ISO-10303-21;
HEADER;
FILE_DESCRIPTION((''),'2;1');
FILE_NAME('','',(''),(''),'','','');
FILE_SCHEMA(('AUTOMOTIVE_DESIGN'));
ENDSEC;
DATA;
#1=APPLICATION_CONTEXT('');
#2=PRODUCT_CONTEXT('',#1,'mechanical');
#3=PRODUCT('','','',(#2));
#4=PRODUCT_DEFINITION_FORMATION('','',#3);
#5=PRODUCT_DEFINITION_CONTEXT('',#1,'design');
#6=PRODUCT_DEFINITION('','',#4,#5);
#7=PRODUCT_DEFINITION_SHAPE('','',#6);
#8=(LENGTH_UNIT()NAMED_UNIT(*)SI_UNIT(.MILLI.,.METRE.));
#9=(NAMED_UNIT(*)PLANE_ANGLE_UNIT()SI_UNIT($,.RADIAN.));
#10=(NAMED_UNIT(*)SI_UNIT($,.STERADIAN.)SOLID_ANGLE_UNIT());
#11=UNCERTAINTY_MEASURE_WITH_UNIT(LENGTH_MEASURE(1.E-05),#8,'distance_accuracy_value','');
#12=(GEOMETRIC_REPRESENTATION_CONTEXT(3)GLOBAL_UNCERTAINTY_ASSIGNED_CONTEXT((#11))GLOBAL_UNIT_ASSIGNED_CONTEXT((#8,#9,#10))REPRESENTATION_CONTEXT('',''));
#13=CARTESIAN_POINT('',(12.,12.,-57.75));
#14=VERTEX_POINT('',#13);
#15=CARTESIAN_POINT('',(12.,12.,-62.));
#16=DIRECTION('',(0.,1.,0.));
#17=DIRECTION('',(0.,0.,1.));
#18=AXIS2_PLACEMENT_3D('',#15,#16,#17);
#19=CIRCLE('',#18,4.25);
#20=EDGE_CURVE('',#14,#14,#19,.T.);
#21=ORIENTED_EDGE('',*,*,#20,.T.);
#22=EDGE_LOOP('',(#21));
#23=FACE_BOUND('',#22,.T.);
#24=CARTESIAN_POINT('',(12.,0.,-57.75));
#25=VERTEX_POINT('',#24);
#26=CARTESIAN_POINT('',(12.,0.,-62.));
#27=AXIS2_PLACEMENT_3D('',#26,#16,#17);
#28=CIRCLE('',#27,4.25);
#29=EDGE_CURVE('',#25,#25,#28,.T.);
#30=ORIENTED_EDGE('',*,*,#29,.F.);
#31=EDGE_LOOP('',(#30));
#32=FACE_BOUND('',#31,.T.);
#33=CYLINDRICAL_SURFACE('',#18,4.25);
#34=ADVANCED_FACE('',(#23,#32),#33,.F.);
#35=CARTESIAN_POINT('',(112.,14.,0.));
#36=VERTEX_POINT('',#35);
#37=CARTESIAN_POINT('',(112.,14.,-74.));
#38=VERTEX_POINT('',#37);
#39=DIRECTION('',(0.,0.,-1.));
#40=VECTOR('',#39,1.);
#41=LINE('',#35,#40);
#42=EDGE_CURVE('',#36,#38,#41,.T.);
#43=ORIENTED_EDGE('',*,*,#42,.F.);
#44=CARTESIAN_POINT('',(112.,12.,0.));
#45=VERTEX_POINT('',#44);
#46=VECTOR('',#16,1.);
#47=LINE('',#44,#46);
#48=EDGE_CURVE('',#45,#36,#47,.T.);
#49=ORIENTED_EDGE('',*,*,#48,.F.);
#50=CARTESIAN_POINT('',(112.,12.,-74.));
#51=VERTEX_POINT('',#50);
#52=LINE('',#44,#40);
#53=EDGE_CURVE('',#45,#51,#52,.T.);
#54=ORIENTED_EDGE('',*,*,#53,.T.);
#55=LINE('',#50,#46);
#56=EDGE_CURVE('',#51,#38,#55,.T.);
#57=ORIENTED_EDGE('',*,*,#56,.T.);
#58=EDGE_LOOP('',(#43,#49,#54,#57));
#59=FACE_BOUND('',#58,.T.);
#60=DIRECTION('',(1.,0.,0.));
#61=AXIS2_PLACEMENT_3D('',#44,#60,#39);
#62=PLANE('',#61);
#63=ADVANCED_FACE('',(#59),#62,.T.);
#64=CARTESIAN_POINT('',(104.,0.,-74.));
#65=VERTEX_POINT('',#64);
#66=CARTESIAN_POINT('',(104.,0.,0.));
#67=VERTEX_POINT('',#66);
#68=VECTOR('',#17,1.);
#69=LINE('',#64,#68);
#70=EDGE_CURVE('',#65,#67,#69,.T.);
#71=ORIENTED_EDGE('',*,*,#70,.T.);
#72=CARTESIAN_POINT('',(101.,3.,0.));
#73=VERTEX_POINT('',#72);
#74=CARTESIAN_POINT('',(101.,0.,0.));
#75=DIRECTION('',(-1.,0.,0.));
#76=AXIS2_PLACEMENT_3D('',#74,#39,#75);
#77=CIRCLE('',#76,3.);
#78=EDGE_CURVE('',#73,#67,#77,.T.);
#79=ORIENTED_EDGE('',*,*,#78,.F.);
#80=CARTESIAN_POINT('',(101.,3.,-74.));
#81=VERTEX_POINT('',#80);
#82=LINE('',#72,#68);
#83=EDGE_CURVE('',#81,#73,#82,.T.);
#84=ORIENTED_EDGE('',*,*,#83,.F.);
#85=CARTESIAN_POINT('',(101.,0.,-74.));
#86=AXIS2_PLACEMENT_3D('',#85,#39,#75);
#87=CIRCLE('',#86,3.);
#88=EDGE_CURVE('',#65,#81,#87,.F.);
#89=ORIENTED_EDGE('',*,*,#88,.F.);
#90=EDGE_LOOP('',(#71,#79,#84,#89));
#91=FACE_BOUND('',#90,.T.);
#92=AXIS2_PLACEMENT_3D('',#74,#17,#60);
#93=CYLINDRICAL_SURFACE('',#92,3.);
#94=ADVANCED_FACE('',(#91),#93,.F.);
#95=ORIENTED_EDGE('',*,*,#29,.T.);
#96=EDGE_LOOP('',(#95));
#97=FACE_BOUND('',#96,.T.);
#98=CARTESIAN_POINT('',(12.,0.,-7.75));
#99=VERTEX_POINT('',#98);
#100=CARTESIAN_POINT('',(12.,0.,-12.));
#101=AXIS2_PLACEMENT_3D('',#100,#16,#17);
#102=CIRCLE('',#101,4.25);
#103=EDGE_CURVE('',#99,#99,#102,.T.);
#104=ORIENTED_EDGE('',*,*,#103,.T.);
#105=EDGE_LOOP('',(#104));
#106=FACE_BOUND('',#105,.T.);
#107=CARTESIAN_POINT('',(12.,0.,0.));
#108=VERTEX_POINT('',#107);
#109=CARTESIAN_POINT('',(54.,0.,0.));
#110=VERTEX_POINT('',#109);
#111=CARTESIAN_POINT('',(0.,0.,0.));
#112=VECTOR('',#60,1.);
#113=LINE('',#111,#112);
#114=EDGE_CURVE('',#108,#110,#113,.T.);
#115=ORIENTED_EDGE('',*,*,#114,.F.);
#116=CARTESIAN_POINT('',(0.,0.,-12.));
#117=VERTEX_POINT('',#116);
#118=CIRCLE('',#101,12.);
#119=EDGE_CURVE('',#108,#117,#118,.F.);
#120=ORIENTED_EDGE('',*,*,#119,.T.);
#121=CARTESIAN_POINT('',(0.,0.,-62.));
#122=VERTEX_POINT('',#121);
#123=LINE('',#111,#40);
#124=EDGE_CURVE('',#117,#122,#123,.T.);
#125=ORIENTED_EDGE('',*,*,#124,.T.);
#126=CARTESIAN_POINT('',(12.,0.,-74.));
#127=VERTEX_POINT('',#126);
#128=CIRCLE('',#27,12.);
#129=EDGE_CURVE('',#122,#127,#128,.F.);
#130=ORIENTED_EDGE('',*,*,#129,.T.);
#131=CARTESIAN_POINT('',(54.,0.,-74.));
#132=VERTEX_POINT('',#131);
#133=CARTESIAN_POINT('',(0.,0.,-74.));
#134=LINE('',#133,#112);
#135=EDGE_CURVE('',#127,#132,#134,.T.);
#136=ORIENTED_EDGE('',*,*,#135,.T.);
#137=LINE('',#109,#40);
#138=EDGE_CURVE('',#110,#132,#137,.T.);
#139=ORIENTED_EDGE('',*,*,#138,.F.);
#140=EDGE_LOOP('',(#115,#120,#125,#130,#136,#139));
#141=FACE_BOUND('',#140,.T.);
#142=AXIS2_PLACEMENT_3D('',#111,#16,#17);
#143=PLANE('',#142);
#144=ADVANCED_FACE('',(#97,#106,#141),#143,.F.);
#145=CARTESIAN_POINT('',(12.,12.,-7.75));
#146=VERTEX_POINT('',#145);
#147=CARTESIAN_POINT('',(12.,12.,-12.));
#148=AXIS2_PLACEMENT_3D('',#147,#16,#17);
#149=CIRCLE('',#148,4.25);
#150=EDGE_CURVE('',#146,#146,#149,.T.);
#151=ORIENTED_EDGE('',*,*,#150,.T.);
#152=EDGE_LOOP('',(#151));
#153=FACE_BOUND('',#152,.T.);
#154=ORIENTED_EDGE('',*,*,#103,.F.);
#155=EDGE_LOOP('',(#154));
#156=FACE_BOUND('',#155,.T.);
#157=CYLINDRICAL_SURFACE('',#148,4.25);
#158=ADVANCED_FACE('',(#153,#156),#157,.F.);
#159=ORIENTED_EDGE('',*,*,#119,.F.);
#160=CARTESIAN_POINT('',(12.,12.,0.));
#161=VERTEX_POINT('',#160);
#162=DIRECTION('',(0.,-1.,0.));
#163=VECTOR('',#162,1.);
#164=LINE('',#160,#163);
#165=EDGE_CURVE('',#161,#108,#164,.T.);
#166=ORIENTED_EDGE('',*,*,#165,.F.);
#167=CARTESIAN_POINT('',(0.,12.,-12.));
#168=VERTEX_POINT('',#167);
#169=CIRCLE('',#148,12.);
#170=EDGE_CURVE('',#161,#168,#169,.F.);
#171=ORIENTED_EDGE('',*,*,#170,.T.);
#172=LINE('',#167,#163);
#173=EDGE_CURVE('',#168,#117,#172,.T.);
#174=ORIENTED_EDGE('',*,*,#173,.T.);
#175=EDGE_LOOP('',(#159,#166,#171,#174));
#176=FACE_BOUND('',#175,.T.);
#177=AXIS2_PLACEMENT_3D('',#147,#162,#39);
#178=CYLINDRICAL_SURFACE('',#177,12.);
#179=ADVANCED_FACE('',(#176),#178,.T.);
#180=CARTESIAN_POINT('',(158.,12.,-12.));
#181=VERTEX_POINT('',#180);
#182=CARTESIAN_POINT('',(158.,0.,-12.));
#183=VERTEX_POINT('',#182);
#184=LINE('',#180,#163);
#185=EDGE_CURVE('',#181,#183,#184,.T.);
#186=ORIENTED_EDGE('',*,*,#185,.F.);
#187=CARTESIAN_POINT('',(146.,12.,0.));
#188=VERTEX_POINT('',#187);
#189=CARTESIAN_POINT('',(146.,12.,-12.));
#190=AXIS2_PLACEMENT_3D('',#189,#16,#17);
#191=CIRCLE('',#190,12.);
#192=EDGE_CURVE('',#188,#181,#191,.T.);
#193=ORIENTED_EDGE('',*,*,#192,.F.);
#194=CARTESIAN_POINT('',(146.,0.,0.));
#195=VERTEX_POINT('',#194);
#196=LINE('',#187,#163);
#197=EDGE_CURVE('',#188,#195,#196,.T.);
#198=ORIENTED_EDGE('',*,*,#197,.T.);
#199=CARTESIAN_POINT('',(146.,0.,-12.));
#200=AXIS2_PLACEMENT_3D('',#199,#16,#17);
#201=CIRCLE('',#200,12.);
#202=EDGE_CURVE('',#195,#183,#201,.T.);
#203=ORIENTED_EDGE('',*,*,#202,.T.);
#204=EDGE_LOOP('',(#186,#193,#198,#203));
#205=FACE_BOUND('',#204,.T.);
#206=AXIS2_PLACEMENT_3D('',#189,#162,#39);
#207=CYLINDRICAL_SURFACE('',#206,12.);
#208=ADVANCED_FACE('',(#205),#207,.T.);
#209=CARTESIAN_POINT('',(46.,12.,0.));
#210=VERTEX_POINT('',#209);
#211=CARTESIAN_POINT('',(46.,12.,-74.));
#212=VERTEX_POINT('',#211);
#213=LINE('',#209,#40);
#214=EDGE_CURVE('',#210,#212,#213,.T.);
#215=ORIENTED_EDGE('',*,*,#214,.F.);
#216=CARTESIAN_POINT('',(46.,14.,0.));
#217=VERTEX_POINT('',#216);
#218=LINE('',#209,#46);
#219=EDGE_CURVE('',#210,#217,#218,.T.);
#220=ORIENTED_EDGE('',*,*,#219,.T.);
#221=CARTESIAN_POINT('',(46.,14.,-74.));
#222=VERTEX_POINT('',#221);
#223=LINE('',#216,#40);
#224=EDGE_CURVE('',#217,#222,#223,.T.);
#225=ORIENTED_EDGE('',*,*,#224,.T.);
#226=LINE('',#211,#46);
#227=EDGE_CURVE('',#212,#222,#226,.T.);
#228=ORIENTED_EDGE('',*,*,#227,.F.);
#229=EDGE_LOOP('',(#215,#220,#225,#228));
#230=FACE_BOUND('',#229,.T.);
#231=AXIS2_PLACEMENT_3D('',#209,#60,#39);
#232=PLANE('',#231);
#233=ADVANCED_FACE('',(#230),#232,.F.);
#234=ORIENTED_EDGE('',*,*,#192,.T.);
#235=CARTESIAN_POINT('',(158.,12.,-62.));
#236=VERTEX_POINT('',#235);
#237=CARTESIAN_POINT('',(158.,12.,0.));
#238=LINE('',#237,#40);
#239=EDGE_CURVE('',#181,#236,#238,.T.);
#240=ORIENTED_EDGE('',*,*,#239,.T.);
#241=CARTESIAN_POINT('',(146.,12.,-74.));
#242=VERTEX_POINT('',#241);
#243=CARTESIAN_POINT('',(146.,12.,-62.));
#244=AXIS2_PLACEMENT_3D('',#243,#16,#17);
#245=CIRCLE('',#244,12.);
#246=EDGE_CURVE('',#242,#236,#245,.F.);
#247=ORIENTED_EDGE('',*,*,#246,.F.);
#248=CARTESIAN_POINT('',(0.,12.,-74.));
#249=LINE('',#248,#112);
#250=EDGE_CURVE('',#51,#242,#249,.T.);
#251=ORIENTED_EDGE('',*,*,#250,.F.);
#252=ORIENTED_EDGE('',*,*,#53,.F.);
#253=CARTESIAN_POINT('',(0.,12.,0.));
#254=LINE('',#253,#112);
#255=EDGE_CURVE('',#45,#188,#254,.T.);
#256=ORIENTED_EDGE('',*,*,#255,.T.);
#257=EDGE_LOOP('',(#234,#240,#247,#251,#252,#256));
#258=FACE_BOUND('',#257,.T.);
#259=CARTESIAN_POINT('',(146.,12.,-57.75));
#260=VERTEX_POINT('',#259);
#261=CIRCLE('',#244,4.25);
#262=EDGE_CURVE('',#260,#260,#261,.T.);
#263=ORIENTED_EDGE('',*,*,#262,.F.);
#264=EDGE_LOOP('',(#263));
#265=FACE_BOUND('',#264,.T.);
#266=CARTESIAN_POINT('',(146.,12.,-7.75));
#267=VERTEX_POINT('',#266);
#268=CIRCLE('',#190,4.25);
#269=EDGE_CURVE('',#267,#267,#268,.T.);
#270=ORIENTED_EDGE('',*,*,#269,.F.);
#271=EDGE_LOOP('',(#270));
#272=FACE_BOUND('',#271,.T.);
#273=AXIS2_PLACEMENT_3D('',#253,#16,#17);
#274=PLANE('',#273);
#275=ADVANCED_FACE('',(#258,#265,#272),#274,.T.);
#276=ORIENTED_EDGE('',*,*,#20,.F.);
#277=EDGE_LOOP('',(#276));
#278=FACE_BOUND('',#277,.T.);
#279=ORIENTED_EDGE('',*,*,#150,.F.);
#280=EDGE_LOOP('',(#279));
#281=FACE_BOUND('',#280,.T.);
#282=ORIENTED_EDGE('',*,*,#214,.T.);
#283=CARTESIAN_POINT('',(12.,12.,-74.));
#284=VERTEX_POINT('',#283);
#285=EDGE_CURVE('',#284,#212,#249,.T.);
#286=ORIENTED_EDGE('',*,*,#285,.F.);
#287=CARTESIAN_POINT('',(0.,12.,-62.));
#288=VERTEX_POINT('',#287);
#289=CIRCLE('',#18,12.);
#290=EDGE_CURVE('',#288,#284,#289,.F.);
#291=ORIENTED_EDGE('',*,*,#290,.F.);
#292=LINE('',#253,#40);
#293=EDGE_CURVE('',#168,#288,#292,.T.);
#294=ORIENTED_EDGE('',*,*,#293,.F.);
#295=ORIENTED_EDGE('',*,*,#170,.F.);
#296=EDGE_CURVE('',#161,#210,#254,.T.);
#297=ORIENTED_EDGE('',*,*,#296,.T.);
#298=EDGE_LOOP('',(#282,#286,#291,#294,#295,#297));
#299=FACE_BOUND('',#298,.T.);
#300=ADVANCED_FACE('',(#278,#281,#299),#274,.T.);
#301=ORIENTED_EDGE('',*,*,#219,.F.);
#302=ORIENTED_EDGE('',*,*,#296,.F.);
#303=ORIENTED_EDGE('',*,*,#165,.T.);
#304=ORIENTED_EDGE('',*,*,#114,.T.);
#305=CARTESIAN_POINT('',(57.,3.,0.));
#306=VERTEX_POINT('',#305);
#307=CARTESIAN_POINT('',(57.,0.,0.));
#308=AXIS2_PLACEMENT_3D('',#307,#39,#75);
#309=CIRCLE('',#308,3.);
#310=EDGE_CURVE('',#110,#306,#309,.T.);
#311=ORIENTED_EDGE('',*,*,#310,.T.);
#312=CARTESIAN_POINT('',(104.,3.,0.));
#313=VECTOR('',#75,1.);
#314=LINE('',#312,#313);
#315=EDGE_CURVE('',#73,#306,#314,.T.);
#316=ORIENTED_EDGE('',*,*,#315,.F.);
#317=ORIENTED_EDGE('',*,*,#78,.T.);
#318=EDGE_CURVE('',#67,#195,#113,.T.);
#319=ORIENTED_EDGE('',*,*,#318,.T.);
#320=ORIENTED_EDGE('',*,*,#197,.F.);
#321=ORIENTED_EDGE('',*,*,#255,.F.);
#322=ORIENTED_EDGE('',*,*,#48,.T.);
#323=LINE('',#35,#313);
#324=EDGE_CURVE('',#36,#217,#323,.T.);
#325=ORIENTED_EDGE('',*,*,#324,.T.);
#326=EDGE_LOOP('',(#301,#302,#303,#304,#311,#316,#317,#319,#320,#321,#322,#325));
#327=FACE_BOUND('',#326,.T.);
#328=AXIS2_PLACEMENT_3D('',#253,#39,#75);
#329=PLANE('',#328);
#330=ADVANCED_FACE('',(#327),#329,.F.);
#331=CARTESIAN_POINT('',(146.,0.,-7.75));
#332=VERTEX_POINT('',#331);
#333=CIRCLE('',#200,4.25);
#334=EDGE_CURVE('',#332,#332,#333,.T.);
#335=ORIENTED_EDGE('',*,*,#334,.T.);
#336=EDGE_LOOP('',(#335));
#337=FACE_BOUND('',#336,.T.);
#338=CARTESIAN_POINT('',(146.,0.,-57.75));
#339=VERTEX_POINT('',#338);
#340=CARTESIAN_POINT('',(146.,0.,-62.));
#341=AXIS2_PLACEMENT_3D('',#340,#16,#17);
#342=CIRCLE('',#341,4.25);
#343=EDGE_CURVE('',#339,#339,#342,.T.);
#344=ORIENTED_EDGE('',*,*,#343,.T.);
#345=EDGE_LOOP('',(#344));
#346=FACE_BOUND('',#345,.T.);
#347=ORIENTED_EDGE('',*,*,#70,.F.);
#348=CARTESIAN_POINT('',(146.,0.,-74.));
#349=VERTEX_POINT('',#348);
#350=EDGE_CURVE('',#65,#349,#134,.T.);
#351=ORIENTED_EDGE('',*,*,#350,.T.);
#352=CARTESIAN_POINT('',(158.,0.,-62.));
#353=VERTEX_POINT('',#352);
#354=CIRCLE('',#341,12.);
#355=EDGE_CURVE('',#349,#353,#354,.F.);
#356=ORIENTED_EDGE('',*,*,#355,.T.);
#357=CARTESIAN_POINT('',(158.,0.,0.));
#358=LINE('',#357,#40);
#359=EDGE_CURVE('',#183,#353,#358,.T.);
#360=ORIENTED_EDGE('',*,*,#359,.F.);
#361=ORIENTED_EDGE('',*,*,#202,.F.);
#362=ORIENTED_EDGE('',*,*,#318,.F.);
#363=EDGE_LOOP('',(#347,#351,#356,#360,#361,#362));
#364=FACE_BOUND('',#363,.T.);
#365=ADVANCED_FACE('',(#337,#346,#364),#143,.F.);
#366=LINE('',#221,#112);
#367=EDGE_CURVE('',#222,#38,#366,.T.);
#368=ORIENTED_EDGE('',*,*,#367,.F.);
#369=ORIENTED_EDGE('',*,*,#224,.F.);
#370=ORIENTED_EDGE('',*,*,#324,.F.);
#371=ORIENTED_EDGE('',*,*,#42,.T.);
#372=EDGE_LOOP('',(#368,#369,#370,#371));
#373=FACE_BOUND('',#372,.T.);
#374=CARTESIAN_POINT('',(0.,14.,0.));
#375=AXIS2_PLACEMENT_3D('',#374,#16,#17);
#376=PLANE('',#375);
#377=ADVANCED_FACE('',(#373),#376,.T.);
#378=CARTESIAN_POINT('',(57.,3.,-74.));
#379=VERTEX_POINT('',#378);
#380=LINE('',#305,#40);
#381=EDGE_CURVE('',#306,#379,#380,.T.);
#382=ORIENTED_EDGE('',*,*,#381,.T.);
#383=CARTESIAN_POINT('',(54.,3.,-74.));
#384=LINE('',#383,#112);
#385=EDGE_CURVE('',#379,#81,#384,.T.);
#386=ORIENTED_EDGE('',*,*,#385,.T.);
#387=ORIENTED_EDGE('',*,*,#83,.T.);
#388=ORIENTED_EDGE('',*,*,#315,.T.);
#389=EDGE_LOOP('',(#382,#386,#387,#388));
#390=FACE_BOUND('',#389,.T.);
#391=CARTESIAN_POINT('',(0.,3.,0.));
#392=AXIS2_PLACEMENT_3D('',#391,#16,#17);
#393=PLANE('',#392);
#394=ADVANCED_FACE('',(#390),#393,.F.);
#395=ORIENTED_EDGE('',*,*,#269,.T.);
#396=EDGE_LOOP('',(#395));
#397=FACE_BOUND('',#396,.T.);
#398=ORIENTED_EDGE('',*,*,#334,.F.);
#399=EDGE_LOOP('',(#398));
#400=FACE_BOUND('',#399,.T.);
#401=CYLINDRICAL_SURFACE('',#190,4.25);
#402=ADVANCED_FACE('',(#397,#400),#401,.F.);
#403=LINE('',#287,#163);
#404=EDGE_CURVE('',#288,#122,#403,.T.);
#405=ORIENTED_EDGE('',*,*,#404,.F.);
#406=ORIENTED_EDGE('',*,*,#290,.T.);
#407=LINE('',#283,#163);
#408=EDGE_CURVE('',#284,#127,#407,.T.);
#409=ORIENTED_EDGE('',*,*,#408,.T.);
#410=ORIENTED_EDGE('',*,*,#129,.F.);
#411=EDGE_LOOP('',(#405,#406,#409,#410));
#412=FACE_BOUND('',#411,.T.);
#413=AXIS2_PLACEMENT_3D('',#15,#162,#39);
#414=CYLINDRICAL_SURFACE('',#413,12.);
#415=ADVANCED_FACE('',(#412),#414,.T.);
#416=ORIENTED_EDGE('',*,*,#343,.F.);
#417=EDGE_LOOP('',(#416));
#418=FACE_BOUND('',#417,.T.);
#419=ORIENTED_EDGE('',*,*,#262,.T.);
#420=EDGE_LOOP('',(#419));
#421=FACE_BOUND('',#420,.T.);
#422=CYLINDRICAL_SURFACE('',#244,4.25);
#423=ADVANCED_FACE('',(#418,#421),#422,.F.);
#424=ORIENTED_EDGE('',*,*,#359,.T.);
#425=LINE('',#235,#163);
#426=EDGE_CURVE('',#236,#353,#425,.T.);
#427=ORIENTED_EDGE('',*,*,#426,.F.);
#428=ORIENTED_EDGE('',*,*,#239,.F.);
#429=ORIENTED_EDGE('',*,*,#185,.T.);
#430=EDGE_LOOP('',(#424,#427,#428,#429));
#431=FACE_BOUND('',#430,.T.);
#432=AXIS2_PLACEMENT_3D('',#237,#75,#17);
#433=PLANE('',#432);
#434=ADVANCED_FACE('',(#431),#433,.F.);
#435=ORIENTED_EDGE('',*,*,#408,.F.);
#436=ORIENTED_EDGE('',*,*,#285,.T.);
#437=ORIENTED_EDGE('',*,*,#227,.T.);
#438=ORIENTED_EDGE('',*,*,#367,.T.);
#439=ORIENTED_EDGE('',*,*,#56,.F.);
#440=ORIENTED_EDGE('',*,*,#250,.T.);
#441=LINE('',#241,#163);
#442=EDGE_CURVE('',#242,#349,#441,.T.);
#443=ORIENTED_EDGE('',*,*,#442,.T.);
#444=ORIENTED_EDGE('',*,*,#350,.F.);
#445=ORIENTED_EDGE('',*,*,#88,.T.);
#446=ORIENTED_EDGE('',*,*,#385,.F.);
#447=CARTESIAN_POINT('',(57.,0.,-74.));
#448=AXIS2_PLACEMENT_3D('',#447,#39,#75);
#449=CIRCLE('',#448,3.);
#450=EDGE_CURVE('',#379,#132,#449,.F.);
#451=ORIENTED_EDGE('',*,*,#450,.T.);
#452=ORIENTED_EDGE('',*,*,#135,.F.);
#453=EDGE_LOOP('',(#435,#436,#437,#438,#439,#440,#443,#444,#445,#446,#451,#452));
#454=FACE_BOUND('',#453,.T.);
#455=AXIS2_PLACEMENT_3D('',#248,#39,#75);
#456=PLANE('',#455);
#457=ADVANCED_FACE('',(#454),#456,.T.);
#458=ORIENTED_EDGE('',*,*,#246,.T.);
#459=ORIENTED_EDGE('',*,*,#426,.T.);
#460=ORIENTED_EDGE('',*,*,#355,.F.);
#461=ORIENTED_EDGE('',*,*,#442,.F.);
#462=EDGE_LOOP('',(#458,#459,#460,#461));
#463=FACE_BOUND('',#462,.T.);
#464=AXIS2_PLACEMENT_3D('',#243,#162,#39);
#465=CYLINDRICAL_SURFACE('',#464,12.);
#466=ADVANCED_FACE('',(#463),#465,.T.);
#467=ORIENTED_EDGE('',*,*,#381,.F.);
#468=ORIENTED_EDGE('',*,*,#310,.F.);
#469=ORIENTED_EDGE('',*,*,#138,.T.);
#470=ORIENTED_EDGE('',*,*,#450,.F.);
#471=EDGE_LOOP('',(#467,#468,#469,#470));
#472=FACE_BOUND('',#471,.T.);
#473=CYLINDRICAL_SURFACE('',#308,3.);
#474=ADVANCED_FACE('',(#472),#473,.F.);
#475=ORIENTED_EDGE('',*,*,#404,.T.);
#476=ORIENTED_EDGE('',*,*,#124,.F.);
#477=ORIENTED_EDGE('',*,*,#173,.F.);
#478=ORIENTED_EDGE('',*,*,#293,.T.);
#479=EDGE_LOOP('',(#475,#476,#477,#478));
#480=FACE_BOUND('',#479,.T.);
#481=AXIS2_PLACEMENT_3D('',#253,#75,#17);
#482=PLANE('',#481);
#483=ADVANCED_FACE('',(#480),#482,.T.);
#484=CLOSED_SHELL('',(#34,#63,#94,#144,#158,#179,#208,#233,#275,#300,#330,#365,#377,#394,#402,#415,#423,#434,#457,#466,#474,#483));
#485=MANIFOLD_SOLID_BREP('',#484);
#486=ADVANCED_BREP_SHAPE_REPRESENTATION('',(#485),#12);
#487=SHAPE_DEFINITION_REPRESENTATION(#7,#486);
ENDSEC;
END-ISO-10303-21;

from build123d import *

# Parameters (mm, degrees)
BOSS_EXTRUDE2_DEPTH              = 12
BOSS_EXTRUDE3_DEPTH              = 2
CUT_EXTRUDE1_DEPTH               = 3
FILLET1_R                        = 3
TAP_DRILL_FOR_M10X1_5_TAP1_D     = 8.5
TAP_DRILL_FOR_M10X1_5_TAP1_DEPTH = 12.55
TAP_DRILL_FOR_M10X1_5_TAP1_TIP   = 4.25


with BuildPart() as part:
    # Sketch2 → Boss-Extrude2 (new body)
    with BuildSketch(Plane(origin=(0, 0, 0), x_dir=(1, 0, 0), z_dir=(0, 1, 0))):
        with BuildLine():
            Line((12, 0), (146, 0))
            ThreePointArc((146, 0), (154.485281374, 3.514718626), (158, 12))
            Line((158, 12), (158, 62))
            ThreePointArc((158, 62), (154.485281374, 70.485281374), (146, 74))
            Line((146, 74), (12, 74))
            ThreePointArc((12, 74), (3.514718626, 70.485281374), (0, 62))
            Line((0, 62), (0, 12))
            ThreePointArc((0, 12), (3.514718626, 3.514718626), (12, 0))
        make_face()
    extrude(amount=BOSS_EXTRUDE2_DEPTH)

    # 3DSketch2 → Boss-Extrude3 (add)
    with BuildSketch(Plane(origin=(112, 12, 0), x_dir=(-0.6656148469584017, 0, -0.7462954344685109), z_dir=(0, -1, 0))):
        Polygon((0, 0), (55.225862151, 49.255498675), (99.15644205, 0), (43.930579899, -49.255498675), align=None)
    extrude(amount=-BOSS_EXTRUDE3_DEPTH)

    # 3DSketch3 → Cut-Extrude1 (cut)
    with BuildSketch(Plane(origin=(104, 0, -74), x_dir=(-0.5598574112779868, 0, 0.8285889686914202), z_dir=(0, -1, 0))):
        Polygon((0, 0), (61.315583683, -41.429448435), (89.308454247, 0), (27.992870564, 41.429448435), align=None)
    extrude(amount=-CUT_EXTRUDE1_DEPTH, mode=Mode.SUBTRACT)

    # Fillet1
    fillet1_edges = [part.edges().sort_by_distance(p)[0] for p in [
        (104, 3, -37),
        (54, 3, -37),
    ]]
    fillet(fillet1_edges, radius=FILLET1_R - 0.0001)  # a hair under: the kernel refuses the full size

    # Tap Drill for M10x1.5 Tap1
    with Locations(Plane(origin=(0, 12, 0), x_dir=(1, 0, 0), z_dir=(0, 1, 0))):
        with Locations((146, 12), (146, 62), (12, 12), (12, 62)):
            Hole(TAP_DRILL_FOR_M10X1_5_TAP1_D / 2, depth=TAP_DRILL_FOR_M10X1_5_TAP1_DEPTH)
            with Locations((0, 0, -(TAP_DRILL_FOR_M10X1_5_TAP1_DEPTH + TAP_DRILL_FOR_M10X1_5_TAP1_TIP / 2))):  # 90° drill point
                Cone(0, TAP_DRILL_FOR_M10X1_5_TAP1_D / 2, TAP_DRILL_FOR_M10X1_5_TAP1_TIP, mode=Mode.SUBTRACT)


solid = part.part
